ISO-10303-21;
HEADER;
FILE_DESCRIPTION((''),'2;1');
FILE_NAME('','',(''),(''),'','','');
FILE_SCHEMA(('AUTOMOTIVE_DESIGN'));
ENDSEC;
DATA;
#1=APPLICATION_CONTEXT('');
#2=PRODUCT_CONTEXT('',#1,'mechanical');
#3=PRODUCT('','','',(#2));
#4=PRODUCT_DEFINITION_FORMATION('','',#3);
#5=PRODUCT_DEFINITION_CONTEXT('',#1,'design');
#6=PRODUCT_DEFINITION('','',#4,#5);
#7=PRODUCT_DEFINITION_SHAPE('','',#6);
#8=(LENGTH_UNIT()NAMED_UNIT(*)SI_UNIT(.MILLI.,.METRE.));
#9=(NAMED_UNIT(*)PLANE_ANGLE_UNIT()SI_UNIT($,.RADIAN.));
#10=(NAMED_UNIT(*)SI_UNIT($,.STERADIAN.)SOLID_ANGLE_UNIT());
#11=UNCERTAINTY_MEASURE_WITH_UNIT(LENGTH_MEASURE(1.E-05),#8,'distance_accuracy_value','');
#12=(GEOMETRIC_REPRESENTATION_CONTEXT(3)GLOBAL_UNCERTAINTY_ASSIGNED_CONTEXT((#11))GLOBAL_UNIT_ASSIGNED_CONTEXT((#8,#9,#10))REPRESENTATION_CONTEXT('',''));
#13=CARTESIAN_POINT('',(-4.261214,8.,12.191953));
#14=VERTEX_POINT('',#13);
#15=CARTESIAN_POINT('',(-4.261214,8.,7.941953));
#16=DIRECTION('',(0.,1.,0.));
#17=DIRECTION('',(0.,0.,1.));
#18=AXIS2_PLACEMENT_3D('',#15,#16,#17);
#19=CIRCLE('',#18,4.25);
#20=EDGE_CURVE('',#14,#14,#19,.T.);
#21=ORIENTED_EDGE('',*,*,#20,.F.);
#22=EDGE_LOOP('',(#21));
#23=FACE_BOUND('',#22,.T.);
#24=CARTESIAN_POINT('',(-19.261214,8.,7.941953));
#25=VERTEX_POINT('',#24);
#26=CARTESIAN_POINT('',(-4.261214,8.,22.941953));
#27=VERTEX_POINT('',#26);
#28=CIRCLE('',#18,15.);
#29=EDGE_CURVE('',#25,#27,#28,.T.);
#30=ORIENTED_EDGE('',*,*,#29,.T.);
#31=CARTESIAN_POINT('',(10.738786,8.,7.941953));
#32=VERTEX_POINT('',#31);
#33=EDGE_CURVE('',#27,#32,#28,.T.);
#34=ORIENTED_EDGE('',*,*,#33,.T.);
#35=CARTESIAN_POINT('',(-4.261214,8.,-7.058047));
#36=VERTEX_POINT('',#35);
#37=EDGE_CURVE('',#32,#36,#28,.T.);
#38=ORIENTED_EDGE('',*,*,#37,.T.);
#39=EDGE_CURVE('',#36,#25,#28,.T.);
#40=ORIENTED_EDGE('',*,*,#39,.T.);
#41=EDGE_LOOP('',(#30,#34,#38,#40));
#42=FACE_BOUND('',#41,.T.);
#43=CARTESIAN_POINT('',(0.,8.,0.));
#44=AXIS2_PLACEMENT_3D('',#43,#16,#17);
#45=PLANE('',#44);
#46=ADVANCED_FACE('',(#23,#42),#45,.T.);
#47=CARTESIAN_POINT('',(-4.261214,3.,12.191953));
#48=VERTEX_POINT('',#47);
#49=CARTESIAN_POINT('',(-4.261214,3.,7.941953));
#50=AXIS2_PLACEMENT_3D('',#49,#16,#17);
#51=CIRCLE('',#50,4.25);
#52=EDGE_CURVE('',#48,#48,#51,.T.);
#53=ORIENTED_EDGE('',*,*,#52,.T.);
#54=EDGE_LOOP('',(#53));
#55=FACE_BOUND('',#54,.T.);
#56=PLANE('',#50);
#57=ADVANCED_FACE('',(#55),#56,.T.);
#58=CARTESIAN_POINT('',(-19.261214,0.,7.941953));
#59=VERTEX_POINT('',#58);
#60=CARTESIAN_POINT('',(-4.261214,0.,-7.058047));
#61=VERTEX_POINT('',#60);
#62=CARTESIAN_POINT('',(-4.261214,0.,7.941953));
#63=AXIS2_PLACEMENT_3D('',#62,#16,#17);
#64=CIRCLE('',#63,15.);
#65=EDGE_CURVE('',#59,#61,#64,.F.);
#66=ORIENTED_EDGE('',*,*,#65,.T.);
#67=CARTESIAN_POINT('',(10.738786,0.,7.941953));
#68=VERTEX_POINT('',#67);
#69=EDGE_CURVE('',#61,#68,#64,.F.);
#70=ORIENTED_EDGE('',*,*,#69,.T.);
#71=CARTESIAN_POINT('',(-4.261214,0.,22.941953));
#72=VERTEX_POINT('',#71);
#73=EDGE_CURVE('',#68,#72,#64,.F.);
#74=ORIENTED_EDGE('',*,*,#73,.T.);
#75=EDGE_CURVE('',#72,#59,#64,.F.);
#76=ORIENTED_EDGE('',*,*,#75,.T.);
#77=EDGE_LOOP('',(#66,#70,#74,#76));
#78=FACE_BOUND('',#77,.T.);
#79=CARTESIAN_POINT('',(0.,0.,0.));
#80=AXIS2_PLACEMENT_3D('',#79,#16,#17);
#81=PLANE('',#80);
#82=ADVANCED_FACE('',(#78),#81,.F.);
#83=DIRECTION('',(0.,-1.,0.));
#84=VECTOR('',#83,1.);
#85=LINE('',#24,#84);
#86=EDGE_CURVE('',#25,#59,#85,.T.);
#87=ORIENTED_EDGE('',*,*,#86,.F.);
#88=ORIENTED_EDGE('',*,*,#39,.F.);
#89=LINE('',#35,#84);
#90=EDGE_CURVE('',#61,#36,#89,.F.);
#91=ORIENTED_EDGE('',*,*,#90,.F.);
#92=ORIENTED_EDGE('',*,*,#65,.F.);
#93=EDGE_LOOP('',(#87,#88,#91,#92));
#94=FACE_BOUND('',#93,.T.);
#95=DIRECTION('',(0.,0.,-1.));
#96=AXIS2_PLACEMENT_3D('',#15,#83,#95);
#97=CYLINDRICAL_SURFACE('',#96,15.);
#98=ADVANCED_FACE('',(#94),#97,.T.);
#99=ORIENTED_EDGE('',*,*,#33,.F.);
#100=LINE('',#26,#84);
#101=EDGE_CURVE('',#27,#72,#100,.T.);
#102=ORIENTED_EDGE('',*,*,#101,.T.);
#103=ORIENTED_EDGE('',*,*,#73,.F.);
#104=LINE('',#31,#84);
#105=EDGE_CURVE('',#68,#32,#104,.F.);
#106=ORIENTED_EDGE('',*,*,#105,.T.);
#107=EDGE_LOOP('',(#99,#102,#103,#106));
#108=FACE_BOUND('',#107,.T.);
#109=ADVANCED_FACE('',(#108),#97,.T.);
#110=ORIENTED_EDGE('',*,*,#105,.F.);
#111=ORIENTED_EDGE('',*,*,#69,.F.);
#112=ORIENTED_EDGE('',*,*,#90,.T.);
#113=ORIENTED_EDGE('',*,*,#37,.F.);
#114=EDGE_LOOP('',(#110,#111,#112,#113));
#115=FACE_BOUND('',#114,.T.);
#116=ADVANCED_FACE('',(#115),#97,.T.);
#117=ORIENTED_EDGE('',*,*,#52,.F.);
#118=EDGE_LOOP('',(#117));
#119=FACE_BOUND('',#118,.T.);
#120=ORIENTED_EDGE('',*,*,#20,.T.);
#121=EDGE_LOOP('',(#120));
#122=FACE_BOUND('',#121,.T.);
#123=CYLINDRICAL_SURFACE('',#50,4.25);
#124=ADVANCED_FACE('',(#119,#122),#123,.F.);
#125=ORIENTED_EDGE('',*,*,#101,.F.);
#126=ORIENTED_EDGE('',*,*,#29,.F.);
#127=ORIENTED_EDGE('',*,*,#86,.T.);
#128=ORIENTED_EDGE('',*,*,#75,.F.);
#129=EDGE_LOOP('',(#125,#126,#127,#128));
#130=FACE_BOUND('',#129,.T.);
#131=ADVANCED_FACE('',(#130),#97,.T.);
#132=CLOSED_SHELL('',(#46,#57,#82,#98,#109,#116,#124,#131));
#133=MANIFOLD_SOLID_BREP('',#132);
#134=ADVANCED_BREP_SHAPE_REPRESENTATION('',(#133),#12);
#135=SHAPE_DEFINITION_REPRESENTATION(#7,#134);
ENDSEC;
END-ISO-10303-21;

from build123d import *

# Parameters (mm, degrees)
SKETCH1_W           = 30
SKETCH1_H           = 30
BOSS_EXTRUDE3_DEPTH = 8
SKETCH3_R           = 4.25
CUT_EXTRUDE2_DEPTH  = 5
FILLET2_R           = 15


with BuildPart() as part:
    # Sketch1 → Boss-Extrude3 (new body)
    with BuildSketch(Plane(origin=(0, 0, 0), x_dir=(1, 0, 0), z_dir=(0, 1, 0))):
        with Locations((-4.26121372, -7.941952507)):
            Rectangle(SKETCH1_W, SKETCH1_H)
    extrude(amount=BOSS_EXTRUDE3_DEPTH)

    # Sketch3 → Cut-Extrude2 (cut)
    with BuildSketch(Plane(origin=(0, 8, 0), x_dir=(1, 0, 0), z_dir=(0, 1, 0))):
        with Locations(Location((-4.26121372, -7.941952507, 0), (0, 0, 270))):
            Circle(SKETCH3_R)
    extrude(amount=-CUT_EXTRUDE2_DEPTH, mode=Mode.SUBTRACT)

    # Fillet2
    fillet2_edges = [part.edges().sort_by_distance(p)[0] for p in [
        (10.73878628, 4, 22.941952507),
        (-19.26121372, 4, 22.941952507),
        (-19.26121372, 4, -7.058047493),
        (10.73878628, 4, -7.058047493),
    ]]
    fillet(fillet2_edges, radius=FILLET2_R - 0.0001)  # a hair under: the kernel refuses the full size


solid = part.part
